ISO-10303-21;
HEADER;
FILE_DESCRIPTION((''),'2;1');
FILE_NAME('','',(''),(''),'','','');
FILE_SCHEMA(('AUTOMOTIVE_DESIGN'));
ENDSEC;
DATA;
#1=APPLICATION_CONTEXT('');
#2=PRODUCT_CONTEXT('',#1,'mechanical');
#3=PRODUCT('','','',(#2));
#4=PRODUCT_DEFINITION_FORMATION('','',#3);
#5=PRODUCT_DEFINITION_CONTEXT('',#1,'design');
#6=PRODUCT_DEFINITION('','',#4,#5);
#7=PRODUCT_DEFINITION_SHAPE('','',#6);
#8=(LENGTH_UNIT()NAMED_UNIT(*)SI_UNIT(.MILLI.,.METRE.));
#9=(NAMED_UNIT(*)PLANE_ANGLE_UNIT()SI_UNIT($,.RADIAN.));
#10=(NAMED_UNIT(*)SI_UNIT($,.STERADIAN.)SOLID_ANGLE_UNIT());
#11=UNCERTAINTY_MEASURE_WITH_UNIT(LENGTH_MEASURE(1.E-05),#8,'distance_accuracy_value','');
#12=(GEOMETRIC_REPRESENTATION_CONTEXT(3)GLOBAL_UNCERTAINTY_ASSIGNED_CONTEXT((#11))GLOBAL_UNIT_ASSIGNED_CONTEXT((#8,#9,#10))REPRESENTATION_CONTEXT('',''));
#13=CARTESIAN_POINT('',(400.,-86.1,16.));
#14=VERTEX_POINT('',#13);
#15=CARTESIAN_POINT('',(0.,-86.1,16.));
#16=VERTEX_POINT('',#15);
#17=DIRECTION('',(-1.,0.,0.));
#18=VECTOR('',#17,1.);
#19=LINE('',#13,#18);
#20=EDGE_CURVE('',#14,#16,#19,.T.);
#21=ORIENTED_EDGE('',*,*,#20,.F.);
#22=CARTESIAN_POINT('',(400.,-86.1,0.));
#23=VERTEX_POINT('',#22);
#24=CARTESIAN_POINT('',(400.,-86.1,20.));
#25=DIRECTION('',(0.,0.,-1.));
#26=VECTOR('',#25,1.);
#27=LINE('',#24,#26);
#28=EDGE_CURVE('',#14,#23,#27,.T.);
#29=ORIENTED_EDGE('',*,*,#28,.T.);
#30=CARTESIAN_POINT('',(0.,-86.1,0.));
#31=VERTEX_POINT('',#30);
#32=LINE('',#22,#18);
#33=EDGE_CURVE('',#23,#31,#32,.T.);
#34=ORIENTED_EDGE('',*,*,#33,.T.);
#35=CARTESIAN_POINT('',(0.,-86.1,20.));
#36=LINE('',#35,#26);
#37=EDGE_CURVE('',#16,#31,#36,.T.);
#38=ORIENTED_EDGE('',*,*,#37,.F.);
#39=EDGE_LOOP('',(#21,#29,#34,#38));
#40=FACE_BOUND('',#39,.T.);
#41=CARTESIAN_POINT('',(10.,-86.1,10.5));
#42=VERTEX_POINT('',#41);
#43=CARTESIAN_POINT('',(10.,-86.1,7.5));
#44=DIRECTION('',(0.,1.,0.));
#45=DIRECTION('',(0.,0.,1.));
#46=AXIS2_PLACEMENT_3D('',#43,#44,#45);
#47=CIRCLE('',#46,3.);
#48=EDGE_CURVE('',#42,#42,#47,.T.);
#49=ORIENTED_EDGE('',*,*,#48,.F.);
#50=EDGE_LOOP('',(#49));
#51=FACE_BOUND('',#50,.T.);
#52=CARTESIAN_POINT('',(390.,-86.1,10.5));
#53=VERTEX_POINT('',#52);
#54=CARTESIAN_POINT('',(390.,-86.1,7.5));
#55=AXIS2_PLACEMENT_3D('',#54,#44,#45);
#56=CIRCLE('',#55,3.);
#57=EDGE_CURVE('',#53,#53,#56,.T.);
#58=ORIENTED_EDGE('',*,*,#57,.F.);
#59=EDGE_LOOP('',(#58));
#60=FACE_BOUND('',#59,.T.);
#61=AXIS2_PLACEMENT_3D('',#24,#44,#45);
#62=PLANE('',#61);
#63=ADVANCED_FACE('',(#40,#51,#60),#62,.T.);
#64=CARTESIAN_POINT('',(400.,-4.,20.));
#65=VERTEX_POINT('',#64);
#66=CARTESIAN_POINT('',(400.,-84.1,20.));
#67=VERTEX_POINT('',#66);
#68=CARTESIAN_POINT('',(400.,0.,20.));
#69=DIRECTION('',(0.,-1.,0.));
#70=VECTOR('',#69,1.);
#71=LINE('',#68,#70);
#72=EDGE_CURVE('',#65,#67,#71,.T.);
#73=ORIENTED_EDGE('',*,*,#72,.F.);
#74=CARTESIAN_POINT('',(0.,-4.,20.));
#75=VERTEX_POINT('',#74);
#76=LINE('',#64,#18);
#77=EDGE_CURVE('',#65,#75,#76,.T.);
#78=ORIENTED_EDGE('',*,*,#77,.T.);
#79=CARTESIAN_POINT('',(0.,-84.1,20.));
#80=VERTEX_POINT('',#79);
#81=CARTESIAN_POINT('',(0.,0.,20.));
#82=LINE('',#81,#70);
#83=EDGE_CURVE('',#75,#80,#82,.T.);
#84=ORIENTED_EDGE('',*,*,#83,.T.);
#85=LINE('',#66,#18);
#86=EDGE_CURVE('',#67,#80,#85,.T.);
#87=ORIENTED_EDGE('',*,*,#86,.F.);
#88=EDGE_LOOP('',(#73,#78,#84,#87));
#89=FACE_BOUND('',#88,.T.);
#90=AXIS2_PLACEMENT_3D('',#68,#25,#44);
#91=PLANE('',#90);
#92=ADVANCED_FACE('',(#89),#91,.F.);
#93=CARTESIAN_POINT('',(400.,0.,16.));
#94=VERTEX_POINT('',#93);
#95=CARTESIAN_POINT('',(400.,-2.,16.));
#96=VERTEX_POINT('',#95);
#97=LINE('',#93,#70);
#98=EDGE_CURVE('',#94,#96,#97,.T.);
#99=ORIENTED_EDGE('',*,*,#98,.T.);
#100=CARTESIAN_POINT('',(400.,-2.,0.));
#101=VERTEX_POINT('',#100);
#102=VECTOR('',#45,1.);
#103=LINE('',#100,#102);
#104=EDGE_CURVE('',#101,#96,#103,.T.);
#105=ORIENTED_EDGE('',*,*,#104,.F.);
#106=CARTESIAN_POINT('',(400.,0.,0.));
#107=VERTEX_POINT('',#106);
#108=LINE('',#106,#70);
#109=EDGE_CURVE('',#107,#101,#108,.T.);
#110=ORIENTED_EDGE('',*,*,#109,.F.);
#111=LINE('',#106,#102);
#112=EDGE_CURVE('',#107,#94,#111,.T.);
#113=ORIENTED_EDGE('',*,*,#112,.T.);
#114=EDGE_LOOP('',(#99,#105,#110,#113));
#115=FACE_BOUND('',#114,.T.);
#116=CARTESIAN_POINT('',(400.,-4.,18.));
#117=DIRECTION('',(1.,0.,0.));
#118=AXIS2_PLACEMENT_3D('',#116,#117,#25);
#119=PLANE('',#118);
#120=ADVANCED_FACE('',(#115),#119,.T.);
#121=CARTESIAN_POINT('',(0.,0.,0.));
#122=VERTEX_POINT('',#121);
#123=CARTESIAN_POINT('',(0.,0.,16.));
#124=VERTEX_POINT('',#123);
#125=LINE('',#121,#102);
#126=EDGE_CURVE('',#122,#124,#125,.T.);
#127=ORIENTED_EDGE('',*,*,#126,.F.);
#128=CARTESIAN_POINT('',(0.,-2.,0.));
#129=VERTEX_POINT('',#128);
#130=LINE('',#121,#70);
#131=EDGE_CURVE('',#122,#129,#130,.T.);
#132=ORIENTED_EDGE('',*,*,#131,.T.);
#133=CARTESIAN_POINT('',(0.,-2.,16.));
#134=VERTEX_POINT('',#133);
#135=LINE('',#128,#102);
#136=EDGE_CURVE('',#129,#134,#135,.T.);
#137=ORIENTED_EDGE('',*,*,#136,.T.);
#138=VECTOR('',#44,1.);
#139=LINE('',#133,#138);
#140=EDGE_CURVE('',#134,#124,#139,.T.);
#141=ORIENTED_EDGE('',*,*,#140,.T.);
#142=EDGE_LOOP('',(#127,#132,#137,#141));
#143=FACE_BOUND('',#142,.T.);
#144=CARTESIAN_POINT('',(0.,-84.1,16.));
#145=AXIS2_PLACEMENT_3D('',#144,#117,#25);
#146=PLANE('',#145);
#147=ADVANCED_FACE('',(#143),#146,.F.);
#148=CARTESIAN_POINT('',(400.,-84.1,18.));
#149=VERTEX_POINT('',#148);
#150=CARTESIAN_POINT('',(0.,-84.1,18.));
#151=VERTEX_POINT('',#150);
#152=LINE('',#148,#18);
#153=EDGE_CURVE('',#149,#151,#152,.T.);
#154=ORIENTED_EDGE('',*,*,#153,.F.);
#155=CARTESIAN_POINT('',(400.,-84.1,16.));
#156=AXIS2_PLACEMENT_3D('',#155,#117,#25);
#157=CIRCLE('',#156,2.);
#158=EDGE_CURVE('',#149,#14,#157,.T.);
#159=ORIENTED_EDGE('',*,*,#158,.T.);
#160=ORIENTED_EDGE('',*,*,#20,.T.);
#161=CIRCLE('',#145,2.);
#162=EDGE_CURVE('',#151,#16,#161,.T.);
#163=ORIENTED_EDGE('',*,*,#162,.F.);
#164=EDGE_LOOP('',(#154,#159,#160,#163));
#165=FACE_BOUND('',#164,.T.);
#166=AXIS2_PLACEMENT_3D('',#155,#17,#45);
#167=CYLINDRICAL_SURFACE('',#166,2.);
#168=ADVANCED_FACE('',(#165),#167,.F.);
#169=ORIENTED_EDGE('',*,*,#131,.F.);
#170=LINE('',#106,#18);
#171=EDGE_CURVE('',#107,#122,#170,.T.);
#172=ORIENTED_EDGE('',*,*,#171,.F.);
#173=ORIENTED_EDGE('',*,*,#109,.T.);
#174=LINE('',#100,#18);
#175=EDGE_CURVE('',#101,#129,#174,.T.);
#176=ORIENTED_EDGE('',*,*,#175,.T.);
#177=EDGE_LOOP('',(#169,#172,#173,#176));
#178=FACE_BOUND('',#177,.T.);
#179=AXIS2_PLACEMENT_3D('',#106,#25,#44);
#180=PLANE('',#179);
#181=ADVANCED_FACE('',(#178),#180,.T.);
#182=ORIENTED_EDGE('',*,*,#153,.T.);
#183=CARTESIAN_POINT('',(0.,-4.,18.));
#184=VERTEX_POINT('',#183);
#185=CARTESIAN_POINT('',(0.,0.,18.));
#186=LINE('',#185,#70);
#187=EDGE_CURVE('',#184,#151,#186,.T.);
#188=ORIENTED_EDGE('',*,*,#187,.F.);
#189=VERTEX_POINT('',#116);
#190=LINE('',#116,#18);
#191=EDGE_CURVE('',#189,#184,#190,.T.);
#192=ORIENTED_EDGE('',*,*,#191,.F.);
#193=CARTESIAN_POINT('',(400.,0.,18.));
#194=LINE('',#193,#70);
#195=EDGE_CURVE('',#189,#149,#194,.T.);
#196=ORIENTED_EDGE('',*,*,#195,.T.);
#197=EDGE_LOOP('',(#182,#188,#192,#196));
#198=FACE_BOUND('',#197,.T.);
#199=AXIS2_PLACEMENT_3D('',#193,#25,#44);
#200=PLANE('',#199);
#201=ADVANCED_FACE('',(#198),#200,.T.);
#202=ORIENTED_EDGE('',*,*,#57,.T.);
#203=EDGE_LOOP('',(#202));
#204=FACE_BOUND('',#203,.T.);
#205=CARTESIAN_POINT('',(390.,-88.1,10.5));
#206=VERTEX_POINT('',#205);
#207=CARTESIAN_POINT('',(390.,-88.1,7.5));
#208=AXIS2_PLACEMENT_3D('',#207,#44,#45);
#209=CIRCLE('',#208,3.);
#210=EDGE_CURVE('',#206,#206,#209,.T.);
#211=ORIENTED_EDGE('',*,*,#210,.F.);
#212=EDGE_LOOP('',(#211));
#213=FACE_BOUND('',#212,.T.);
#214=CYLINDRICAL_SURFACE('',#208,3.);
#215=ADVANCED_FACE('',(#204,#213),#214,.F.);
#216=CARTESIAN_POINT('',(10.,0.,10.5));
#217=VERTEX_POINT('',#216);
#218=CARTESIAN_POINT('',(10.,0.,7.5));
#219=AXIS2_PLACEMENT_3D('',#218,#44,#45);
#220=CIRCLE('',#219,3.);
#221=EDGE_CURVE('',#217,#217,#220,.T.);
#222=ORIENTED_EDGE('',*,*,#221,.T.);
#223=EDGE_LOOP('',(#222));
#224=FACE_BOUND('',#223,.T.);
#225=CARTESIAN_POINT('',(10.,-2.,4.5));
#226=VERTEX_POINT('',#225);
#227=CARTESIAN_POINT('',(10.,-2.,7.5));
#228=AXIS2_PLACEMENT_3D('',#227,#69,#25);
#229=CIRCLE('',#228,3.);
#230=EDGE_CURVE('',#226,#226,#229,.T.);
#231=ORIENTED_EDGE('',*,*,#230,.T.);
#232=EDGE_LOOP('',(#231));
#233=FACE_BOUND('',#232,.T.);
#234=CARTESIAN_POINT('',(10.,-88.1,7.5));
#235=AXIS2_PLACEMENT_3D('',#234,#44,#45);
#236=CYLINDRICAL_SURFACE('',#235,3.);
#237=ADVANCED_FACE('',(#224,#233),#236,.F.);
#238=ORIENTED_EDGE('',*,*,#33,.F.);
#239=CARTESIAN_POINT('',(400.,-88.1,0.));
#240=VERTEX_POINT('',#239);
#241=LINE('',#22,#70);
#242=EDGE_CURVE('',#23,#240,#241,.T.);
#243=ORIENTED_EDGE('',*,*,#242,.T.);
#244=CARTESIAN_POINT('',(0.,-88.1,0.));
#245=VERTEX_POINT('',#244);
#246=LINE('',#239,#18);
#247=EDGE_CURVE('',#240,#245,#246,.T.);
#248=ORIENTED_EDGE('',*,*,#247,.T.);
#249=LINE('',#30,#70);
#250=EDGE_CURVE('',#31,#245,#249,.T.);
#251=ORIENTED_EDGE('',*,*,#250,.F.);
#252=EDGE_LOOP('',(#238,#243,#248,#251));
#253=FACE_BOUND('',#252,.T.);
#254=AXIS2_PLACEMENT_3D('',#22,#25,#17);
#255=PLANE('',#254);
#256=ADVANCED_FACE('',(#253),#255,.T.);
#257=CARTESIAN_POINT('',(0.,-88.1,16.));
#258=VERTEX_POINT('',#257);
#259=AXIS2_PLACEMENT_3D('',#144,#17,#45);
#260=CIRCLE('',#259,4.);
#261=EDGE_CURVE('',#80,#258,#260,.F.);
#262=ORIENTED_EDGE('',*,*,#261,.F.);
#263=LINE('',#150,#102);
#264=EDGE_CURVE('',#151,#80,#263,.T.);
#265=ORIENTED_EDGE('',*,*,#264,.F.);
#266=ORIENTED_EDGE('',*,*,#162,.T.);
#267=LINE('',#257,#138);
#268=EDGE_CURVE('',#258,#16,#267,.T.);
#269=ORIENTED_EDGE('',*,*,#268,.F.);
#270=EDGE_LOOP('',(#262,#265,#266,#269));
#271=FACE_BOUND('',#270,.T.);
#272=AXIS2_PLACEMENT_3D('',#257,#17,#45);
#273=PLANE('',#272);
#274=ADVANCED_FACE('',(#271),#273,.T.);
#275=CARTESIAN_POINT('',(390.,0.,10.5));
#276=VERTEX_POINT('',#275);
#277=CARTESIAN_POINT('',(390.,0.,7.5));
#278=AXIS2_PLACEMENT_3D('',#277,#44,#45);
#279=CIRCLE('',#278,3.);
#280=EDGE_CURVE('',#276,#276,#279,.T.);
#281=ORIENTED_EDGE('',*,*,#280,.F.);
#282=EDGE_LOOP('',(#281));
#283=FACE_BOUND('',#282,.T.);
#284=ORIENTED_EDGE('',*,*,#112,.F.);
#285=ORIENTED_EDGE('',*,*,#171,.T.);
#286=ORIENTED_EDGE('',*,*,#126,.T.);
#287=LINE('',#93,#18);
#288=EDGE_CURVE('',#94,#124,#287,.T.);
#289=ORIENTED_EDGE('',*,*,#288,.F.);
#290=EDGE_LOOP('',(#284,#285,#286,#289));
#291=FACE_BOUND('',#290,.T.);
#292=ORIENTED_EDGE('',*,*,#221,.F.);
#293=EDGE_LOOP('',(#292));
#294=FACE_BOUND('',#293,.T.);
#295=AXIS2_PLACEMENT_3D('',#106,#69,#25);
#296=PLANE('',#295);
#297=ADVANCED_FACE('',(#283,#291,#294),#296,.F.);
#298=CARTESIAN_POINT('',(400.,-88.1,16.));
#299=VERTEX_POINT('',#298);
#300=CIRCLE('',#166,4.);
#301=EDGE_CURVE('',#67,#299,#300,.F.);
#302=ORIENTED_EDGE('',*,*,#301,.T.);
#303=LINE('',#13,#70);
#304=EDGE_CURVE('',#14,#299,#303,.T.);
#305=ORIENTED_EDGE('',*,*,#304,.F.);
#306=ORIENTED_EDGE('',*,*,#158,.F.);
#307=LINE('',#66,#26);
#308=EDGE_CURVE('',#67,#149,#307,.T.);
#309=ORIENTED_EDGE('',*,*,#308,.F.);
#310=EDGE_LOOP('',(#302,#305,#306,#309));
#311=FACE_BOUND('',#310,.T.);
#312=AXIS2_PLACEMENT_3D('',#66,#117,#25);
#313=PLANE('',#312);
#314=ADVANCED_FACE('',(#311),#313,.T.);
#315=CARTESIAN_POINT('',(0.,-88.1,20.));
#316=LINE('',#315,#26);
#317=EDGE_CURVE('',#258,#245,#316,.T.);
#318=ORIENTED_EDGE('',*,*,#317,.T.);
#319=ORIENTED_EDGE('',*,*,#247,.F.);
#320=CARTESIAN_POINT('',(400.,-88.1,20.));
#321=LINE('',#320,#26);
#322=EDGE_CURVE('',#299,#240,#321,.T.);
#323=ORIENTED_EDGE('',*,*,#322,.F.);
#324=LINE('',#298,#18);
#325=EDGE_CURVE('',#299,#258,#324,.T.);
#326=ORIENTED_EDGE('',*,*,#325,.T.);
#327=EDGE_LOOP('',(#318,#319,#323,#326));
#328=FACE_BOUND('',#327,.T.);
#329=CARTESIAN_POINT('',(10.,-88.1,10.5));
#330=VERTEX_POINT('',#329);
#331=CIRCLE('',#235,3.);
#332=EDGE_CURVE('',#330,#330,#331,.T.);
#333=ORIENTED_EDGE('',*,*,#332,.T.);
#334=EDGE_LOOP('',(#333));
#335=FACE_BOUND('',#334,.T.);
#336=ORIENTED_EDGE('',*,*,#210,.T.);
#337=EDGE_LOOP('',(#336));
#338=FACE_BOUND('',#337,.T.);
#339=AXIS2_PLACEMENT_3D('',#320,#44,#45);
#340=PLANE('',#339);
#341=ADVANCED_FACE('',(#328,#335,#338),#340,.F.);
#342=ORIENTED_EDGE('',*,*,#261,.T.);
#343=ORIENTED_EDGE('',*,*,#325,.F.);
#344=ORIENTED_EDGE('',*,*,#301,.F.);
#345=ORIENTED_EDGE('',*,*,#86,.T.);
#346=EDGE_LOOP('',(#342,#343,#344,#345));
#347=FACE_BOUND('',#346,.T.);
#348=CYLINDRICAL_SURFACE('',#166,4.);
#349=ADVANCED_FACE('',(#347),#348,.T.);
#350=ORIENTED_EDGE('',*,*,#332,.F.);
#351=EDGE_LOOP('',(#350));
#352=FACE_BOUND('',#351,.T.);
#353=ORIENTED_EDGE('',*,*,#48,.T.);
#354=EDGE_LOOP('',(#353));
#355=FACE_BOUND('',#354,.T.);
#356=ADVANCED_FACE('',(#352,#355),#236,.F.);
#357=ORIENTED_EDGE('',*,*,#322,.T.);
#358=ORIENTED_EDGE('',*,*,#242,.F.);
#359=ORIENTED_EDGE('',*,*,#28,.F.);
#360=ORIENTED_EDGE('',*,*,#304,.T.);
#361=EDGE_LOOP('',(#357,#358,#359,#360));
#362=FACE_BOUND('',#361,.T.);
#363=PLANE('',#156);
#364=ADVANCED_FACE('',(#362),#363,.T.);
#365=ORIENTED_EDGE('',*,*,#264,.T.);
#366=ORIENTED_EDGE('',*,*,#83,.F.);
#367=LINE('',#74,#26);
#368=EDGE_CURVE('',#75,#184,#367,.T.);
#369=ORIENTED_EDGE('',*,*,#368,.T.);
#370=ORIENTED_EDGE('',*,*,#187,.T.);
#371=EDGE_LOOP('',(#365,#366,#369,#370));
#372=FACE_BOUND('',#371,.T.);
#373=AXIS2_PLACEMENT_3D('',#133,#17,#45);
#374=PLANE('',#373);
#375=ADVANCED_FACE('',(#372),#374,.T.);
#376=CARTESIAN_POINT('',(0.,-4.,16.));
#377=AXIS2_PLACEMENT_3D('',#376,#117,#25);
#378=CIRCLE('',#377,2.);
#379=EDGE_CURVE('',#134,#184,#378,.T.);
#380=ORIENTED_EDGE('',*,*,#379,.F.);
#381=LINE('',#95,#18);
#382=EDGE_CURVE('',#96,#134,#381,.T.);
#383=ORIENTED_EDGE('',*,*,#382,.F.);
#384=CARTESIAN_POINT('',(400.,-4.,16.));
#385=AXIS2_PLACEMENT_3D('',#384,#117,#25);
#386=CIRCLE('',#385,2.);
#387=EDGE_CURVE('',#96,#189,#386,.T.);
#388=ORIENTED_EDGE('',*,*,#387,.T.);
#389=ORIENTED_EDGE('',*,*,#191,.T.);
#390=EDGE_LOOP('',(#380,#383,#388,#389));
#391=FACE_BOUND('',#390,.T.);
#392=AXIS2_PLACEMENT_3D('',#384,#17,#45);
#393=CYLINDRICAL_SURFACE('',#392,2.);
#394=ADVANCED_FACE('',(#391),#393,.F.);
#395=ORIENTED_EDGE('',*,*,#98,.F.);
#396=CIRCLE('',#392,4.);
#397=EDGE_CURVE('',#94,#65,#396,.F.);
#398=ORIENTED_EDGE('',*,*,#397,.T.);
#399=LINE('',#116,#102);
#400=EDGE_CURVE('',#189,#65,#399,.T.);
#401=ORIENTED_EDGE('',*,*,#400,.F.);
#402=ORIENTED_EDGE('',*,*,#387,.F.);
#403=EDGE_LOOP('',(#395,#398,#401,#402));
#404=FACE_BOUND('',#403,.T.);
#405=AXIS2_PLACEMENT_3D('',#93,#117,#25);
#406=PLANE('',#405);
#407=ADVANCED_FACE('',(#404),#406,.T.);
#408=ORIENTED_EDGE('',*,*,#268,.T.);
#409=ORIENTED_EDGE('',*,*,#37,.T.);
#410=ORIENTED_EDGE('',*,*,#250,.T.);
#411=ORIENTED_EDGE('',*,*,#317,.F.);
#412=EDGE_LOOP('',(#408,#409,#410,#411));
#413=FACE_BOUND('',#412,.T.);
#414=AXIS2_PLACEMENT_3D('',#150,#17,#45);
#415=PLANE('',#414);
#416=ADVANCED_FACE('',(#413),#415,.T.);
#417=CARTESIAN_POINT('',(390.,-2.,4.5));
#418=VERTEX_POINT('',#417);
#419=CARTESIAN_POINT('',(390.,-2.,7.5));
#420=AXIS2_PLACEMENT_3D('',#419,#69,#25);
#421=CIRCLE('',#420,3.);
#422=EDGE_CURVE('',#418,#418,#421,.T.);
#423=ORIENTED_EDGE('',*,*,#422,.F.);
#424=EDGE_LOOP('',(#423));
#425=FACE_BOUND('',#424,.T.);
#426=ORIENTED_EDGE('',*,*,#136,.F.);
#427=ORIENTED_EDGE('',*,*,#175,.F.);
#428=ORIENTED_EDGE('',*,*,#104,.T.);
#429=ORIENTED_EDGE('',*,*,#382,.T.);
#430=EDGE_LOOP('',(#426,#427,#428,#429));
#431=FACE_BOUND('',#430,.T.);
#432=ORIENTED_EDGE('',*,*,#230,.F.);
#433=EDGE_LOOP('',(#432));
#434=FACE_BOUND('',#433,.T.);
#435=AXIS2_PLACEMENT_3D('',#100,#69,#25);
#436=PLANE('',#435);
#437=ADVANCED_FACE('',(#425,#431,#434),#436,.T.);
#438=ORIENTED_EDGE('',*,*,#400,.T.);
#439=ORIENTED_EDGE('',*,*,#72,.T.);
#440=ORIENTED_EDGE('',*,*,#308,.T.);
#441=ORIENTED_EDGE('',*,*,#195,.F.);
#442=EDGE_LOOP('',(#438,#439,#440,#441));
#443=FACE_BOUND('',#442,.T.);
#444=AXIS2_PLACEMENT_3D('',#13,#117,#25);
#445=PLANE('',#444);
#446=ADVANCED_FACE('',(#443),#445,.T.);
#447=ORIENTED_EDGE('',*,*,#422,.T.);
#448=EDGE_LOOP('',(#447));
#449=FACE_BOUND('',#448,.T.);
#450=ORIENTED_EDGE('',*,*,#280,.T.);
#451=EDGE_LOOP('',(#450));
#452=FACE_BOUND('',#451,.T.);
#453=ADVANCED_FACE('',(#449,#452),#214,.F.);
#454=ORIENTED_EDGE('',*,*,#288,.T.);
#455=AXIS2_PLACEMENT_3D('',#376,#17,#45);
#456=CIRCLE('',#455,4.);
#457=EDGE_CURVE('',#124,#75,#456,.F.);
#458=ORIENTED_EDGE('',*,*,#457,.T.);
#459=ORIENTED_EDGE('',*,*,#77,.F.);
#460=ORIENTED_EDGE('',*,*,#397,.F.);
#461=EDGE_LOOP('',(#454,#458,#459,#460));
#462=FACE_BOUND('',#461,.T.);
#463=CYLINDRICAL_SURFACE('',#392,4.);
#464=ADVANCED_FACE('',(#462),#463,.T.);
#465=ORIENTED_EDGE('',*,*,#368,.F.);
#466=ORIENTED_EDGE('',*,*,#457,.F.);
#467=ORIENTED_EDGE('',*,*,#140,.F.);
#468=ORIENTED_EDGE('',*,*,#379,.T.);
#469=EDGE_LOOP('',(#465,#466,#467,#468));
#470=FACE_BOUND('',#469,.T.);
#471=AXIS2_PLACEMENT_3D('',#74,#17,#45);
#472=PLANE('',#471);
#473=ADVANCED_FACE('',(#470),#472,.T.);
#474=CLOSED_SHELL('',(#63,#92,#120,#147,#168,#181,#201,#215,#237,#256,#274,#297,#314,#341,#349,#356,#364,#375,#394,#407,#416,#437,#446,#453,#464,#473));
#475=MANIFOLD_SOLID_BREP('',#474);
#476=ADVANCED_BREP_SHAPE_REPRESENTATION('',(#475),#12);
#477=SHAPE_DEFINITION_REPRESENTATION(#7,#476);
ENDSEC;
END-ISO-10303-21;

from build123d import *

# Parameters (mm, degrees)
SM_BASE_FLANGE_2_DEPTH = 400
SKETCH_15_R            = 3
CUT_EXTRUDE_2_DEPTH    = 411.075127263


# Sheet-metal steps are written as plain solids
with BuildPart() as part:
    # Эскиз9 → Базовая кромка2 (new body)
    with BuildSketch(Plane(origin=(0, 0, 0), x_dir=(0, 0, -1), z_dir=(1, 0, 0))):
        with BuildLine():
            Line((0, 0), (-16, 0))
            ThreePointArc((-16, 0), (-18.828427125, -1.171572875), (-20, -4))
            Line((-20, -4), (-20, -84.1))
            ThreePointArc((-20, -84.1), (-18.828427125, -86.928427125), (-16, -88.1))
            Line((-16, -88.1), (0, -88.1))
            Line((0, -88.1), (0, -86.1))
            Line((0, -86.1), (-16, -86.1))
            ThreePointArc((-16, -86.1), (-17.414213562, -85.514213562), (-18, -84.1))
            Line((-18, -84.1), (-18, -4))
            ThreePointArc((-18, -4), (-17.414213562, -2.585786438), (-16, -2))
            Line((-16, -2), (0, -2))
            Line((0, -2), (0, 0))
        make_face()
    extrude(amount=SM_BASE_FLANGE_2_DEPTH)

    # Эскиз15 → Вырез-Вытянуть2 (cut, through all)
    with BuildSketch(Plane(origin=(0, 0, 0), x_dir=(1, 0, 0), z_dir=(0, 1, 0))):
        with Locations(Location((390, -7.5, 0), (0, 0, 270))):
            Circle(SKETCH_15_R)
        with Locations(Location((10, -7.5, 0), (0, 0, 270))):
            Circle(SKETCH_15_R)
    extrude(amount=-CUT_EXTRUDE_2_DEPTH, mode=Mode.SUBTRACT)


solid = part.part
